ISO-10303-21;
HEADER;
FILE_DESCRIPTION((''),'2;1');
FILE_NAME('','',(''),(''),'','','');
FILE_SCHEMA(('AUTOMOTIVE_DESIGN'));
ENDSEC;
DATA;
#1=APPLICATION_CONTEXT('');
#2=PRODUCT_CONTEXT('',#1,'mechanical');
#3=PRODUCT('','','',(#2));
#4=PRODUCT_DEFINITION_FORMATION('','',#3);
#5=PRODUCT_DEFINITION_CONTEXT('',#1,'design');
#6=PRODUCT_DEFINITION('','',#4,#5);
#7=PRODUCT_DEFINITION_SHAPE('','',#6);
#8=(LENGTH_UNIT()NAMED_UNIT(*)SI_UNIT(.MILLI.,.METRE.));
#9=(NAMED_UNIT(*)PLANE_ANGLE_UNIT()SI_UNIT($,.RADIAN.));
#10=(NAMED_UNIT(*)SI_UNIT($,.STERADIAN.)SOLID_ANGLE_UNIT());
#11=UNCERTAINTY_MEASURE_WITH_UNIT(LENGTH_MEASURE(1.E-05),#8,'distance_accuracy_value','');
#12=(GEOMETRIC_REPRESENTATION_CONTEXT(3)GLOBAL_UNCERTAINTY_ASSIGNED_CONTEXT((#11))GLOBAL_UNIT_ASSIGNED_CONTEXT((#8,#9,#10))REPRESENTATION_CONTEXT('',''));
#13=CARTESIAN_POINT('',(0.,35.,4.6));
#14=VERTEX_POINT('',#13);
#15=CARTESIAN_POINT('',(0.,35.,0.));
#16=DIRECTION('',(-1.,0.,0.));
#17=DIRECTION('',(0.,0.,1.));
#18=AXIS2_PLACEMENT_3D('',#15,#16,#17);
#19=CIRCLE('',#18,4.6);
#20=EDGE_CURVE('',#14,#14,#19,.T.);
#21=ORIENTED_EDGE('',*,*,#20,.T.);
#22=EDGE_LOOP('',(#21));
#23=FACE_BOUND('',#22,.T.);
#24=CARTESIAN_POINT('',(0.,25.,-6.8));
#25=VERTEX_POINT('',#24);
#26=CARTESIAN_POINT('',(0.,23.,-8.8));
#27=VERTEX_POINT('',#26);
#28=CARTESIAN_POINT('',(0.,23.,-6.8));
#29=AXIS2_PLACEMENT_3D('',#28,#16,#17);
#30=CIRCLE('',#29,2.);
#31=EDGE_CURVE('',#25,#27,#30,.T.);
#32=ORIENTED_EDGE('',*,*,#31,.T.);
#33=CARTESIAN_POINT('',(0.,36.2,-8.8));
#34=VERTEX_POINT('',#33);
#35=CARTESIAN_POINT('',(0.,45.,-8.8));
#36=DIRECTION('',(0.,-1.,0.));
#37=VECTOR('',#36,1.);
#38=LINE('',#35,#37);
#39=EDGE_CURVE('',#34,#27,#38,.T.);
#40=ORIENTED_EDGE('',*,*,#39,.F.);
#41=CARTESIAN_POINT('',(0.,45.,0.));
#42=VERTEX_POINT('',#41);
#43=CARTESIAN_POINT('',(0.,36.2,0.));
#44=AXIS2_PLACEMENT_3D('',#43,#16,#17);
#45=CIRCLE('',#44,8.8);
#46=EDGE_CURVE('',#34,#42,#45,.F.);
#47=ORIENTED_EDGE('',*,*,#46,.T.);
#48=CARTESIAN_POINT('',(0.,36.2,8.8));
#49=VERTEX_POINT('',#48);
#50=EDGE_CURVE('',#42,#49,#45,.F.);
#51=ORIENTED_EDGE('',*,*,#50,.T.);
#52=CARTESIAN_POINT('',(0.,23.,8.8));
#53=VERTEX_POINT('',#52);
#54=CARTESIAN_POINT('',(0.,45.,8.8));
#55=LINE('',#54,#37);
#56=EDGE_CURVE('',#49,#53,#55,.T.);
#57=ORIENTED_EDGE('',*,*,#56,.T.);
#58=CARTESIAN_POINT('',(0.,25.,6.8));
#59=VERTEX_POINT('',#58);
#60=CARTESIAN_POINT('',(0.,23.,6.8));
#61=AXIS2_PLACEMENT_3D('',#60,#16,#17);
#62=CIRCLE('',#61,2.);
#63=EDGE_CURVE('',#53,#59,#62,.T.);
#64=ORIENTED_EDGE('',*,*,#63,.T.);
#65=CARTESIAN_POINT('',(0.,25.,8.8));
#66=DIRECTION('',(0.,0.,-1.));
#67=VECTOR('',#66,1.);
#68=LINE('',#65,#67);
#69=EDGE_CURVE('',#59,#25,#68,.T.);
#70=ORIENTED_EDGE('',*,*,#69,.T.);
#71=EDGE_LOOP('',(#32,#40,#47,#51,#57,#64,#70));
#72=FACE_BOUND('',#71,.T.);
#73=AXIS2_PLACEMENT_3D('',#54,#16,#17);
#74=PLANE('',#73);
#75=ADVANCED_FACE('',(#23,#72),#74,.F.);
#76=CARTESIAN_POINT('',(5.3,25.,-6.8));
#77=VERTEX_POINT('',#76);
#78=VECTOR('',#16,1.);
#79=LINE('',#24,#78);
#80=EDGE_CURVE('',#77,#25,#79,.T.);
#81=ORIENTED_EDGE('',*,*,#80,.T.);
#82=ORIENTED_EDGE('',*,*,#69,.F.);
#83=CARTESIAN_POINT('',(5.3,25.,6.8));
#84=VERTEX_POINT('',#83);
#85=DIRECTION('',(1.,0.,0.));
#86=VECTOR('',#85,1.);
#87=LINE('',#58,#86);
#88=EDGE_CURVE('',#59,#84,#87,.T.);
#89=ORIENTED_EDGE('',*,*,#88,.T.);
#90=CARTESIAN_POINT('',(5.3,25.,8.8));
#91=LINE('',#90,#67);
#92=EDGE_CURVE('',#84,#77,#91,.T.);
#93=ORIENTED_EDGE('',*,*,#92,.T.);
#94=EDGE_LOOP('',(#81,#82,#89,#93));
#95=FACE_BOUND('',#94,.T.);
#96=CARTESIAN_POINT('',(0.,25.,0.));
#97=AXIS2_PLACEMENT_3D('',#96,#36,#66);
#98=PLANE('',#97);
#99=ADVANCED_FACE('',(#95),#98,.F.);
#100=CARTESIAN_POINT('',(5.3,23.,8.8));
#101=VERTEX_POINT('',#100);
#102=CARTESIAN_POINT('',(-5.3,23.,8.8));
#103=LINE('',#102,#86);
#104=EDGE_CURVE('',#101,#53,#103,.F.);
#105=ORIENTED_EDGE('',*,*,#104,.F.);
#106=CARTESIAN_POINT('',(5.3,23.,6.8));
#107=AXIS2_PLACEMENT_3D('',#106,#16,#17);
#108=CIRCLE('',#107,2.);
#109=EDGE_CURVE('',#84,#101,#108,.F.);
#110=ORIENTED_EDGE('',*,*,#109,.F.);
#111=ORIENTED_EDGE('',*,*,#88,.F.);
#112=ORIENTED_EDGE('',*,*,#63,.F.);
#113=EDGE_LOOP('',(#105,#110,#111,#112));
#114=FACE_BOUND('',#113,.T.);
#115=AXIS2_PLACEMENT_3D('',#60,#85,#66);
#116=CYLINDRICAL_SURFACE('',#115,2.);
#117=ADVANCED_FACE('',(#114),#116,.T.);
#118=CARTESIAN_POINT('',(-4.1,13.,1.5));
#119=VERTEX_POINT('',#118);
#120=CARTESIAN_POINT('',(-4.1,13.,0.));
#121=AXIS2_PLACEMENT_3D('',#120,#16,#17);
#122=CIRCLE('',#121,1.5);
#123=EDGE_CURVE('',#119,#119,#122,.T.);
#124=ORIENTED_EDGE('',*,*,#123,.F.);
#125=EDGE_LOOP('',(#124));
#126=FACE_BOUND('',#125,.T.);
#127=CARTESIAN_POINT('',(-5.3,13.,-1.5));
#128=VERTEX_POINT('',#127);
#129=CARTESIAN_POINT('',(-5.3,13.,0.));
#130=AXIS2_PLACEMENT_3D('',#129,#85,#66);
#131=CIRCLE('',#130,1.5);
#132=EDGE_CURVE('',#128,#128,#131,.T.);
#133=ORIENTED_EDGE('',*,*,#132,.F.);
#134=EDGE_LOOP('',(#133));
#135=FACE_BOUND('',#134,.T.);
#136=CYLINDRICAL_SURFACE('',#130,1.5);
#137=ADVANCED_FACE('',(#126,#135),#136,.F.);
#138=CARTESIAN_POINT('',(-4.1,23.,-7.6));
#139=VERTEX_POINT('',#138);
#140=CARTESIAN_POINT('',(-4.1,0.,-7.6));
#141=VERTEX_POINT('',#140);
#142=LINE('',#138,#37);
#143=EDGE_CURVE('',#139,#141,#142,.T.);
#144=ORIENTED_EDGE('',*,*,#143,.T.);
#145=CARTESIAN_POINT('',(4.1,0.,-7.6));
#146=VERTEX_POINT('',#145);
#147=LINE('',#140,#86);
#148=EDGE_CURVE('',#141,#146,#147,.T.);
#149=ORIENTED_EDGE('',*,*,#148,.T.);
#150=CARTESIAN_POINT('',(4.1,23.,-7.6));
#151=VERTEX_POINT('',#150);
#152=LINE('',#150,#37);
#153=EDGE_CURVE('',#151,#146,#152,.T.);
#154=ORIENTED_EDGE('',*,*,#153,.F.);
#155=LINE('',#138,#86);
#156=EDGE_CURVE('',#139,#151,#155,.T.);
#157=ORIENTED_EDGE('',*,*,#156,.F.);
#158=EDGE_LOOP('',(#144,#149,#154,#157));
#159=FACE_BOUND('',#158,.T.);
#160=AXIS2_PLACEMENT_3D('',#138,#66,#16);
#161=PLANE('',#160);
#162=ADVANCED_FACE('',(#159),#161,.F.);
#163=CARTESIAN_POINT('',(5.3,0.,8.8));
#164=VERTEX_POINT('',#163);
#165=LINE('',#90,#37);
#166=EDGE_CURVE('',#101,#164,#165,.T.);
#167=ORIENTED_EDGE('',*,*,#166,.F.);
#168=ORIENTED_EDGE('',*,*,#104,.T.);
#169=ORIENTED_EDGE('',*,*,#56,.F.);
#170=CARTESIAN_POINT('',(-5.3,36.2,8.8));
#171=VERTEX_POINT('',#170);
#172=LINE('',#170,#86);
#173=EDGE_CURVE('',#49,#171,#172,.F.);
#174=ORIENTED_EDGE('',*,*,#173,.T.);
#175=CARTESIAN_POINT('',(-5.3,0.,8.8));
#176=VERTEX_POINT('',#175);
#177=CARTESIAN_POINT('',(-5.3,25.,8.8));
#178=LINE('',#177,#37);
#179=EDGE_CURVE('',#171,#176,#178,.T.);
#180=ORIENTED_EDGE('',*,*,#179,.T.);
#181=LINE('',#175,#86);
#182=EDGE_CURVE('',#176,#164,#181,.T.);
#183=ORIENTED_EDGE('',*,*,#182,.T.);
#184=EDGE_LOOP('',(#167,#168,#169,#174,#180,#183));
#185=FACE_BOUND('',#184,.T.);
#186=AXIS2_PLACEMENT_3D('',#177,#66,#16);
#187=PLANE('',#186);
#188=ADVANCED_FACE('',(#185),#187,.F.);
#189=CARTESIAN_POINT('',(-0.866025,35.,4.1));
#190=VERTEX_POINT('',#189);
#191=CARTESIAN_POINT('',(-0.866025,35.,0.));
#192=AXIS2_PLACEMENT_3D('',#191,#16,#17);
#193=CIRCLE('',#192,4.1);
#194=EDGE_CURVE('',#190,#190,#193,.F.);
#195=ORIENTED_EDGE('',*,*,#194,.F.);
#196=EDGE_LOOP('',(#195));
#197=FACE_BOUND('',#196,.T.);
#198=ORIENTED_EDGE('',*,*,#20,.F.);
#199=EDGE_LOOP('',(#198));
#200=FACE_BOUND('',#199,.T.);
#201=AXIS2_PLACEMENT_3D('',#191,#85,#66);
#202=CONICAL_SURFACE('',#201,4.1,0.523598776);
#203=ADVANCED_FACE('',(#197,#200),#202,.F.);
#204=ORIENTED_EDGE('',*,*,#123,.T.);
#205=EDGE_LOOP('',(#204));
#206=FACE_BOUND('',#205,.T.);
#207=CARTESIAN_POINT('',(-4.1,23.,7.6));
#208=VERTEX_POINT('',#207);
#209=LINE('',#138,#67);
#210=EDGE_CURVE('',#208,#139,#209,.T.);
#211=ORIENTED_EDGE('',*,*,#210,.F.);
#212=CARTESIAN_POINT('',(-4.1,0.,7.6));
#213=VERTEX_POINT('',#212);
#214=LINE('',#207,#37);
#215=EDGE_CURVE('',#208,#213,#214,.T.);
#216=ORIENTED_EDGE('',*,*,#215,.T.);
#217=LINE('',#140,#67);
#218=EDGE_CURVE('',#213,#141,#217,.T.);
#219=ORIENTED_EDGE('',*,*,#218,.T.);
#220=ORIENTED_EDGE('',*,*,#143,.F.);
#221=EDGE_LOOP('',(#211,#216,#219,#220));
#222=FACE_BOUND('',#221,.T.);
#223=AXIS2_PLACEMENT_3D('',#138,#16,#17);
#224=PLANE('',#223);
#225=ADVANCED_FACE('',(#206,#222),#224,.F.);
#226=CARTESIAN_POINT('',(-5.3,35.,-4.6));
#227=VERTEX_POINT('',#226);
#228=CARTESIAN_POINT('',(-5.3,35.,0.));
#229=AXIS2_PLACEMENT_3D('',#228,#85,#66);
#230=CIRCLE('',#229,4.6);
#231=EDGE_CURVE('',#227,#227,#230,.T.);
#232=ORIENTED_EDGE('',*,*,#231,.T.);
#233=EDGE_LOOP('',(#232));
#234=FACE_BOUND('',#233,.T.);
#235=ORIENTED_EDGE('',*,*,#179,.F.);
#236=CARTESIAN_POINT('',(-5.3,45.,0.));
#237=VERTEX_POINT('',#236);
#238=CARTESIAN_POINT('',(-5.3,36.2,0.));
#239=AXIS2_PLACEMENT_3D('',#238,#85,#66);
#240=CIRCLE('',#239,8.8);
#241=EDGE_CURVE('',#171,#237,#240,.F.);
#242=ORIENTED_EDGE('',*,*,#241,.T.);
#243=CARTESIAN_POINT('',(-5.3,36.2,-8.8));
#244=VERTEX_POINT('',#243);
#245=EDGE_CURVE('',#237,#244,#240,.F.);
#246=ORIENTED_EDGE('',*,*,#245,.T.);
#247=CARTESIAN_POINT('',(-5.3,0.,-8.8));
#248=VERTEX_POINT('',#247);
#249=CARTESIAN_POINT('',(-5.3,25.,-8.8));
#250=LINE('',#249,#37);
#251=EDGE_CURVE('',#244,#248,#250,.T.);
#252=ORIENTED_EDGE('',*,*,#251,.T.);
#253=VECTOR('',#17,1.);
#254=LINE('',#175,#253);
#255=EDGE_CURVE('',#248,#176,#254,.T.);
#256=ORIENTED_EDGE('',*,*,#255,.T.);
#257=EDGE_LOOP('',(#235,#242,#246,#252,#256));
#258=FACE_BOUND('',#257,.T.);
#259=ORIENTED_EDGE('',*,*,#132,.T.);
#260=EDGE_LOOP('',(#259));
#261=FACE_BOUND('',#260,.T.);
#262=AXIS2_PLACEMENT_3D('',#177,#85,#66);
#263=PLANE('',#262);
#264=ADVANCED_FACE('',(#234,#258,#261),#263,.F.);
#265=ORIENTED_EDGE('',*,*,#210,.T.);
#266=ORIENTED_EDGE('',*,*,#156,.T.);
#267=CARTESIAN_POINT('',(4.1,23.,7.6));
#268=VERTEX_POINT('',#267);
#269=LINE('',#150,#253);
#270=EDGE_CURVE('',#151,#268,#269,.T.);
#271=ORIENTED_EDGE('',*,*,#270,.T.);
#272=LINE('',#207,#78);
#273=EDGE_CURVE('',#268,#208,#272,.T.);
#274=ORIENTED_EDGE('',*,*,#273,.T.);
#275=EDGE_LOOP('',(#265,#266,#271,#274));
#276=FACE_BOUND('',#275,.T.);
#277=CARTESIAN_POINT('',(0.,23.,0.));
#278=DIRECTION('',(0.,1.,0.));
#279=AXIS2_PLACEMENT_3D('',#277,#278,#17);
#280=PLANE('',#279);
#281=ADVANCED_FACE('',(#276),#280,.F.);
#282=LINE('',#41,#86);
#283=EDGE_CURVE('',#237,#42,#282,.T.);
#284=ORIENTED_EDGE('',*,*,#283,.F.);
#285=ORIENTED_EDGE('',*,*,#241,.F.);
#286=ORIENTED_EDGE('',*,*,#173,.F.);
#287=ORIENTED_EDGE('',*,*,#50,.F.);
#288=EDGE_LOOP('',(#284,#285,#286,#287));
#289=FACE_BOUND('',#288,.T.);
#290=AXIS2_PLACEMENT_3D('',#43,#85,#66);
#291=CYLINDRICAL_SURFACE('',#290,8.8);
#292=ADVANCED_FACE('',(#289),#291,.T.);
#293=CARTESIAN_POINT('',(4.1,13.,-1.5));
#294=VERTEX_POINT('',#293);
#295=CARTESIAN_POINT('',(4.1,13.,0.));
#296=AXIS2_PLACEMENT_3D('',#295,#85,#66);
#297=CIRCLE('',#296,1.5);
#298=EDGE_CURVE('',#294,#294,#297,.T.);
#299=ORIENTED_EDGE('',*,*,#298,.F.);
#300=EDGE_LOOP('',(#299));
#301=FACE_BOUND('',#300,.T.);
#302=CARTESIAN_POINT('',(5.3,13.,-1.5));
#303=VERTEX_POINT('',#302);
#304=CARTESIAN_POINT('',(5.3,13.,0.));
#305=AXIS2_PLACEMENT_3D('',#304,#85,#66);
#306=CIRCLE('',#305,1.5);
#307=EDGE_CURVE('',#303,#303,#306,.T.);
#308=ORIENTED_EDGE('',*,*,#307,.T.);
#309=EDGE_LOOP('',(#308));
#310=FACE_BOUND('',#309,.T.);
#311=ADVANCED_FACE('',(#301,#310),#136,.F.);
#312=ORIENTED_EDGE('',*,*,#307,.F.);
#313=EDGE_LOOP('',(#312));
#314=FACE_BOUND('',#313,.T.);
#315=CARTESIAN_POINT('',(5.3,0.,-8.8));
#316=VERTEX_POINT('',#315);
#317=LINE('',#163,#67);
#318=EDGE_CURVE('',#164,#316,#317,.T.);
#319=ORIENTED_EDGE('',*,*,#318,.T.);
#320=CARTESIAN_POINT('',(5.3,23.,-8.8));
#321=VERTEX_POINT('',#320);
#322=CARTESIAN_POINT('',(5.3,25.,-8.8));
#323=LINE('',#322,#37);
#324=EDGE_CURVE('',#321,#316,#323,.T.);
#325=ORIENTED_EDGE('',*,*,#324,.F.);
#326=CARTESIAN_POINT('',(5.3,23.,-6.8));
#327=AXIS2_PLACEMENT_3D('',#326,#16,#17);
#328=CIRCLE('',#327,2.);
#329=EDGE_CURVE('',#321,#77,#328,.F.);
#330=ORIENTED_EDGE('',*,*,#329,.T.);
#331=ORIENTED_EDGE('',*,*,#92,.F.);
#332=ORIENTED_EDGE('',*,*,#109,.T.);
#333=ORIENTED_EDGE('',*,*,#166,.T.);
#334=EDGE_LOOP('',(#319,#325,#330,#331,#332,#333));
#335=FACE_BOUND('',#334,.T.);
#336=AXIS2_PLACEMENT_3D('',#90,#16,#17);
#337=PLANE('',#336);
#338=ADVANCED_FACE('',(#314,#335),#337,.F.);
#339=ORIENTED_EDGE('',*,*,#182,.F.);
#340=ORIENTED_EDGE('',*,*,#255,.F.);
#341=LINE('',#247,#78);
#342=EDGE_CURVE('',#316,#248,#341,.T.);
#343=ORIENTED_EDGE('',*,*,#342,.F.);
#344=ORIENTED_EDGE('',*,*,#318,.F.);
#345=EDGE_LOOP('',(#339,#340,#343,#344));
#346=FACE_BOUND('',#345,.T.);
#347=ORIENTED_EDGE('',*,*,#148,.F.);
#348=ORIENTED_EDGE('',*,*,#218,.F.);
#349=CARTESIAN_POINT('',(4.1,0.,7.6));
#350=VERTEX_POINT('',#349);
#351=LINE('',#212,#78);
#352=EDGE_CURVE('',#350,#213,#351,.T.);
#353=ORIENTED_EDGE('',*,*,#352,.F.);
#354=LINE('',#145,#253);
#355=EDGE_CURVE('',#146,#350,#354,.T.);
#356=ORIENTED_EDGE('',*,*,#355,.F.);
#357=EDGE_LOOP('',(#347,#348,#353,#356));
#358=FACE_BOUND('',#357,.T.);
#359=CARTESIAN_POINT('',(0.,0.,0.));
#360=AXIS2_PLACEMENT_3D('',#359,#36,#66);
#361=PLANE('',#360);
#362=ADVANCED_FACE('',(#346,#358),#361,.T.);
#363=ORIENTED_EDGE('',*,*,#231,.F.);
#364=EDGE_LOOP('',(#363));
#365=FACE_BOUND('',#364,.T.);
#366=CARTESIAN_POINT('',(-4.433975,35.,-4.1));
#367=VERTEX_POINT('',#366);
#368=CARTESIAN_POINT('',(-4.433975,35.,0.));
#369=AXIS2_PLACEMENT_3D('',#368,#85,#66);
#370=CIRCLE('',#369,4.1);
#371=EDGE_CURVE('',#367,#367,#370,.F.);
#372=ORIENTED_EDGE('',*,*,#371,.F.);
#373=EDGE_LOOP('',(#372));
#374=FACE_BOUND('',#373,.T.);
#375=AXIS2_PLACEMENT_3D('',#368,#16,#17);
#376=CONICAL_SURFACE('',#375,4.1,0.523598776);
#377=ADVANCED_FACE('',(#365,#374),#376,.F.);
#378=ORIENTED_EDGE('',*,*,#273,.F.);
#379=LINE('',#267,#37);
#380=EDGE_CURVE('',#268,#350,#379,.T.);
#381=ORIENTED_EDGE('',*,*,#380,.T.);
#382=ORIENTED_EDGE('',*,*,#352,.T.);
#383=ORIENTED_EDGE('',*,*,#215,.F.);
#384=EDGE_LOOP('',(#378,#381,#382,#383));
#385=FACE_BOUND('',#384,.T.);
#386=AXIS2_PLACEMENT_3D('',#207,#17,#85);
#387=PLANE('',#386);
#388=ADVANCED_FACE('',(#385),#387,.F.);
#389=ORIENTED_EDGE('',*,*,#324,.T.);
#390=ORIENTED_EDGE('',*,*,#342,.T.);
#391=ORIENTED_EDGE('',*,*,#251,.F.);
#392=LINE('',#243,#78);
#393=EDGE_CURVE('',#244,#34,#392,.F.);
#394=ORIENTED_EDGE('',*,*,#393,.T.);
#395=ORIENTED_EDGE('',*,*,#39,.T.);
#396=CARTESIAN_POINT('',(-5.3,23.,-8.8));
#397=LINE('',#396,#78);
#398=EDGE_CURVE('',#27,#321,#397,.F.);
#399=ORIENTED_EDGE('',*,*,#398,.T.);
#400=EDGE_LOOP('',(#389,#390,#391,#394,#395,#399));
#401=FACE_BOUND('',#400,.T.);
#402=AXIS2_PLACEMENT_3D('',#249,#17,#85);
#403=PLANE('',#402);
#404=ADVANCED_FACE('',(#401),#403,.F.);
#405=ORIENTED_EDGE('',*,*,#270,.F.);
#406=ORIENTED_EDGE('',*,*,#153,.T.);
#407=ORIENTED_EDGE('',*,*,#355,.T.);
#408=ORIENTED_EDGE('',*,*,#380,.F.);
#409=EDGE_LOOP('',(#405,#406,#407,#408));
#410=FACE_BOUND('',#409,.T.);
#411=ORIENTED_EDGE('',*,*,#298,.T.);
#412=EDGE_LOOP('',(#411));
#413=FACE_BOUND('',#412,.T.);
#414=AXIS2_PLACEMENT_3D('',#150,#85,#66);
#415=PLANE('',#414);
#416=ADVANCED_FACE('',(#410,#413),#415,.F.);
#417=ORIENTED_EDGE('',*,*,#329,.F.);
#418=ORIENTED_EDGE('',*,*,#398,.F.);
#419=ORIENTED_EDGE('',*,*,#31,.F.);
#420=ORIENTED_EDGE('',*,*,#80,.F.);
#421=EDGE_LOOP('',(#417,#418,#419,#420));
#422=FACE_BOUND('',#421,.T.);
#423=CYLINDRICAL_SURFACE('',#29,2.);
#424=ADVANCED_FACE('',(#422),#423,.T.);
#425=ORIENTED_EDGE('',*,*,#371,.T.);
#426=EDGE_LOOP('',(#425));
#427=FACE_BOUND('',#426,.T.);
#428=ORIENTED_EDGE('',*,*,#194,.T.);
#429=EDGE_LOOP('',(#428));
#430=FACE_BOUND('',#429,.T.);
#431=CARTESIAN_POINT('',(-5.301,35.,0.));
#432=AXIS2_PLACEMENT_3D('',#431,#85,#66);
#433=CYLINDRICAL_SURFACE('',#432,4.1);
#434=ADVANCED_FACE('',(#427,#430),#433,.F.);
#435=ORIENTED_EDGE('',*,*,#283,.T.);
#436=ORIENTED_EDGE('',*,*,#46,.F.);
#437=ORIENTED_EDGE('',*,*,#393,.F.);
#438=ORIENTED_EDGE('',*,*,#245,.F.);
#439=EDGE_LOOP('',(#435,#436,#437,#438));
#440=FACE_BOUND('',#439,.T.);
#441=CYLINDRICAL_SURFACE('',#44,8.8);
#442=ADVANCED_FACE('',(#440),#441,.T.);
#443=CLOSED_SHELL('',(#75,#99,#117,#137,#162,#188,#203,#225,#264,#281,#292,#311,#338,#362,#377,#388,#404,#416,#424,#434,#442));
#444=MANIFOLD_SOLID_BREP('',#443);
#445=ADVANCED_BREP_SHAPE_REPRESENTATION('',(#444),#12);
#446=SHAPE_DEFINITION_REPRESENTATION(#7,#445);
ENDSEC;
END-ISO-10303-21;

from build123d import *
from OCP.BRepFilletAPI import BRepFilletAPI_MakeChamfer

# Parameters (mm, degrees)
SKETCH1_W           = 10.6
SKETCH1_H           = 17.6
BOSS_EXTRUDE1_DEPTH = 25
SKETCH2_W           = 8.2
SKETCH2_H           = 15.2
CUT_EXTRUDE1_DEPTH  = 23
SKETCH4_W           = 5.3
SKETCH4_H           = 17.6
BOSS_EXTRUDE2_DEPTH = 20
CUT_EXTRUDE2_REACH  = 48.158
SKETCH5_R           = 4.1
FILLET1_R           = 8.8
FILLET2_R           = 2
SKETCH6_R           = 1.5
CUT_EXTRUDE3_DEPTH  = 48.061661679
CHAMFER1_SIZE       = 0.5
CHAMFER1_SIZE2      = 0.866025404


with BuildPart() as part:
    # Sketch1 → Boss-Extrude1 (new body)
    with BuildSketch(Plane(origin=(0, 0, 0), x_dir=(1, 0, 0), z_dir=(0, 1, 0))):
        Rectangle(SKETCH1_W, SKETCH1_H)
    extrude(amount=BOSS_EXTRUDE1_DEPTH)

    # Sketch2 → Cut-Extrude1 (cut)
    with BuildSketch(Plane.XZ):
        Rectangle(SKETCH2_W, SKETCH2_H)
    extrude(amount=-CUT_EXTRUDE1_DEPTH, mode=Mode.SUBTRACT)

    # Sketch4 → Boss-Extrude2 (add)
    with BuildSketch(Plane(origin=(0, 25, 0), x_dir=(1, 0, 0), z_dir=(0, 1, 0))):
        with Locations((-2.65, 0)):
            Rectangle(SKETCH4_W, SKETCH4_H)
    extrude(amount=BOSS_EXTRUDE2_DEPTH)

    # Sketch5 → Cut-Extrude2 (cut, up to next)
    with BuildSketch(Plane(origin=(0, 0, 0), x_dir=(0, 0, -1), z_dir=(1, 0, 0)), mode=Mode.PRIVATE) as cut_extrude2_sk1:
        with Locations((0, 35)):
            Circle(SKETCH5_R)
    cut_extrude2_tool1 = extrude(cut_extrude2_sk1.sketch, amount=-CUT_EXTRUDE2_REACH, mode=Mode.PRIVATE) & part.part
    add(cut_extrude2_tool1.solids().sort_by_distance((0, 35, 0))[0], mode=Mode.SUBTRACT)

    # Fillet1
    fillet1_edges = [part.edges().sort_by_distance(p)[0] for p in [
        (-2.65, 45, -8.8),
        (-2.65, 45, 8.8),
    ]]
    fillet(fillet1_edges, radius=FILLET1_R - 0.0001)  # a hair under: the kernel refuses the full size

    # Fillet2
    fillet2_edges = [part.edges().sort_by_distance(p)[0] for p in [
        (2.65, 25, 8.8),
        (2.65, 25, -8.8),
    ]]
    fillet(fillet2_edges, radius=FILLET2_R)

    # Sketch6 → Cut-Extrude3 (cut, through all)
    with BuildSketch(Plane(origin=(5.3, 0, 0), x_dir=(0, 0, -1), z_dir=(1, 0, 0))):
        with Locations((0, 13)):
            Circle(SKETCH6_R)
    extrude(amount=-CUT_EXTRUDE3_DEPTH, mode=Mode.SUBTRACT)

    # Chamfer1: one chamfer whose edges measure the first distance from different faces: ONE call of the kernel's chamfer builder (chamfer() names one face for all edges)
    chamfer1_edges_1 = [part.edges().sort_by_distance(p)[0] for p in [
        (0, 35, 4.1),
    ]]
    chamfer1_side_1 = [part.faces().sort_by_distance(p)[0] for p in [
        (0, 25.281737466, 0),
    ]]
    chamfer1_edges_2 = [part.edges().sort_by_distance(p)[0] for p in [
        (-5.3, 35, 4.1),
    ]]
    chamfer1_side_2 = [part.faces().sort_by_distance(p)[0] for p in [
        (-5.3, 20.674988238, 0),
    ]]
    chamfer1 = BRepFilletAPI_MakeChamfer(part.part.solid().wrapped)
    for e in chamfer1_edges_1:
        chamfer1.Add(CHAMFER1_SIZE, CHAMFER1_SIZE2, e.wrapped, chamfer1_side_1[0].wrapped)  # the first distance lies on this face
    for e in chamfer1_edges_2:
        chamfer1.Add(CHAMFER1_SIZE, CHAMFER1_SIZE2, e.wrapped, chamfer1_side_2[0].wrapped)  # the first distance lies on this face
    add(Compound.cast(chamfer1.Shape()), mode=Mode.REPLACE)


solid = part.part
